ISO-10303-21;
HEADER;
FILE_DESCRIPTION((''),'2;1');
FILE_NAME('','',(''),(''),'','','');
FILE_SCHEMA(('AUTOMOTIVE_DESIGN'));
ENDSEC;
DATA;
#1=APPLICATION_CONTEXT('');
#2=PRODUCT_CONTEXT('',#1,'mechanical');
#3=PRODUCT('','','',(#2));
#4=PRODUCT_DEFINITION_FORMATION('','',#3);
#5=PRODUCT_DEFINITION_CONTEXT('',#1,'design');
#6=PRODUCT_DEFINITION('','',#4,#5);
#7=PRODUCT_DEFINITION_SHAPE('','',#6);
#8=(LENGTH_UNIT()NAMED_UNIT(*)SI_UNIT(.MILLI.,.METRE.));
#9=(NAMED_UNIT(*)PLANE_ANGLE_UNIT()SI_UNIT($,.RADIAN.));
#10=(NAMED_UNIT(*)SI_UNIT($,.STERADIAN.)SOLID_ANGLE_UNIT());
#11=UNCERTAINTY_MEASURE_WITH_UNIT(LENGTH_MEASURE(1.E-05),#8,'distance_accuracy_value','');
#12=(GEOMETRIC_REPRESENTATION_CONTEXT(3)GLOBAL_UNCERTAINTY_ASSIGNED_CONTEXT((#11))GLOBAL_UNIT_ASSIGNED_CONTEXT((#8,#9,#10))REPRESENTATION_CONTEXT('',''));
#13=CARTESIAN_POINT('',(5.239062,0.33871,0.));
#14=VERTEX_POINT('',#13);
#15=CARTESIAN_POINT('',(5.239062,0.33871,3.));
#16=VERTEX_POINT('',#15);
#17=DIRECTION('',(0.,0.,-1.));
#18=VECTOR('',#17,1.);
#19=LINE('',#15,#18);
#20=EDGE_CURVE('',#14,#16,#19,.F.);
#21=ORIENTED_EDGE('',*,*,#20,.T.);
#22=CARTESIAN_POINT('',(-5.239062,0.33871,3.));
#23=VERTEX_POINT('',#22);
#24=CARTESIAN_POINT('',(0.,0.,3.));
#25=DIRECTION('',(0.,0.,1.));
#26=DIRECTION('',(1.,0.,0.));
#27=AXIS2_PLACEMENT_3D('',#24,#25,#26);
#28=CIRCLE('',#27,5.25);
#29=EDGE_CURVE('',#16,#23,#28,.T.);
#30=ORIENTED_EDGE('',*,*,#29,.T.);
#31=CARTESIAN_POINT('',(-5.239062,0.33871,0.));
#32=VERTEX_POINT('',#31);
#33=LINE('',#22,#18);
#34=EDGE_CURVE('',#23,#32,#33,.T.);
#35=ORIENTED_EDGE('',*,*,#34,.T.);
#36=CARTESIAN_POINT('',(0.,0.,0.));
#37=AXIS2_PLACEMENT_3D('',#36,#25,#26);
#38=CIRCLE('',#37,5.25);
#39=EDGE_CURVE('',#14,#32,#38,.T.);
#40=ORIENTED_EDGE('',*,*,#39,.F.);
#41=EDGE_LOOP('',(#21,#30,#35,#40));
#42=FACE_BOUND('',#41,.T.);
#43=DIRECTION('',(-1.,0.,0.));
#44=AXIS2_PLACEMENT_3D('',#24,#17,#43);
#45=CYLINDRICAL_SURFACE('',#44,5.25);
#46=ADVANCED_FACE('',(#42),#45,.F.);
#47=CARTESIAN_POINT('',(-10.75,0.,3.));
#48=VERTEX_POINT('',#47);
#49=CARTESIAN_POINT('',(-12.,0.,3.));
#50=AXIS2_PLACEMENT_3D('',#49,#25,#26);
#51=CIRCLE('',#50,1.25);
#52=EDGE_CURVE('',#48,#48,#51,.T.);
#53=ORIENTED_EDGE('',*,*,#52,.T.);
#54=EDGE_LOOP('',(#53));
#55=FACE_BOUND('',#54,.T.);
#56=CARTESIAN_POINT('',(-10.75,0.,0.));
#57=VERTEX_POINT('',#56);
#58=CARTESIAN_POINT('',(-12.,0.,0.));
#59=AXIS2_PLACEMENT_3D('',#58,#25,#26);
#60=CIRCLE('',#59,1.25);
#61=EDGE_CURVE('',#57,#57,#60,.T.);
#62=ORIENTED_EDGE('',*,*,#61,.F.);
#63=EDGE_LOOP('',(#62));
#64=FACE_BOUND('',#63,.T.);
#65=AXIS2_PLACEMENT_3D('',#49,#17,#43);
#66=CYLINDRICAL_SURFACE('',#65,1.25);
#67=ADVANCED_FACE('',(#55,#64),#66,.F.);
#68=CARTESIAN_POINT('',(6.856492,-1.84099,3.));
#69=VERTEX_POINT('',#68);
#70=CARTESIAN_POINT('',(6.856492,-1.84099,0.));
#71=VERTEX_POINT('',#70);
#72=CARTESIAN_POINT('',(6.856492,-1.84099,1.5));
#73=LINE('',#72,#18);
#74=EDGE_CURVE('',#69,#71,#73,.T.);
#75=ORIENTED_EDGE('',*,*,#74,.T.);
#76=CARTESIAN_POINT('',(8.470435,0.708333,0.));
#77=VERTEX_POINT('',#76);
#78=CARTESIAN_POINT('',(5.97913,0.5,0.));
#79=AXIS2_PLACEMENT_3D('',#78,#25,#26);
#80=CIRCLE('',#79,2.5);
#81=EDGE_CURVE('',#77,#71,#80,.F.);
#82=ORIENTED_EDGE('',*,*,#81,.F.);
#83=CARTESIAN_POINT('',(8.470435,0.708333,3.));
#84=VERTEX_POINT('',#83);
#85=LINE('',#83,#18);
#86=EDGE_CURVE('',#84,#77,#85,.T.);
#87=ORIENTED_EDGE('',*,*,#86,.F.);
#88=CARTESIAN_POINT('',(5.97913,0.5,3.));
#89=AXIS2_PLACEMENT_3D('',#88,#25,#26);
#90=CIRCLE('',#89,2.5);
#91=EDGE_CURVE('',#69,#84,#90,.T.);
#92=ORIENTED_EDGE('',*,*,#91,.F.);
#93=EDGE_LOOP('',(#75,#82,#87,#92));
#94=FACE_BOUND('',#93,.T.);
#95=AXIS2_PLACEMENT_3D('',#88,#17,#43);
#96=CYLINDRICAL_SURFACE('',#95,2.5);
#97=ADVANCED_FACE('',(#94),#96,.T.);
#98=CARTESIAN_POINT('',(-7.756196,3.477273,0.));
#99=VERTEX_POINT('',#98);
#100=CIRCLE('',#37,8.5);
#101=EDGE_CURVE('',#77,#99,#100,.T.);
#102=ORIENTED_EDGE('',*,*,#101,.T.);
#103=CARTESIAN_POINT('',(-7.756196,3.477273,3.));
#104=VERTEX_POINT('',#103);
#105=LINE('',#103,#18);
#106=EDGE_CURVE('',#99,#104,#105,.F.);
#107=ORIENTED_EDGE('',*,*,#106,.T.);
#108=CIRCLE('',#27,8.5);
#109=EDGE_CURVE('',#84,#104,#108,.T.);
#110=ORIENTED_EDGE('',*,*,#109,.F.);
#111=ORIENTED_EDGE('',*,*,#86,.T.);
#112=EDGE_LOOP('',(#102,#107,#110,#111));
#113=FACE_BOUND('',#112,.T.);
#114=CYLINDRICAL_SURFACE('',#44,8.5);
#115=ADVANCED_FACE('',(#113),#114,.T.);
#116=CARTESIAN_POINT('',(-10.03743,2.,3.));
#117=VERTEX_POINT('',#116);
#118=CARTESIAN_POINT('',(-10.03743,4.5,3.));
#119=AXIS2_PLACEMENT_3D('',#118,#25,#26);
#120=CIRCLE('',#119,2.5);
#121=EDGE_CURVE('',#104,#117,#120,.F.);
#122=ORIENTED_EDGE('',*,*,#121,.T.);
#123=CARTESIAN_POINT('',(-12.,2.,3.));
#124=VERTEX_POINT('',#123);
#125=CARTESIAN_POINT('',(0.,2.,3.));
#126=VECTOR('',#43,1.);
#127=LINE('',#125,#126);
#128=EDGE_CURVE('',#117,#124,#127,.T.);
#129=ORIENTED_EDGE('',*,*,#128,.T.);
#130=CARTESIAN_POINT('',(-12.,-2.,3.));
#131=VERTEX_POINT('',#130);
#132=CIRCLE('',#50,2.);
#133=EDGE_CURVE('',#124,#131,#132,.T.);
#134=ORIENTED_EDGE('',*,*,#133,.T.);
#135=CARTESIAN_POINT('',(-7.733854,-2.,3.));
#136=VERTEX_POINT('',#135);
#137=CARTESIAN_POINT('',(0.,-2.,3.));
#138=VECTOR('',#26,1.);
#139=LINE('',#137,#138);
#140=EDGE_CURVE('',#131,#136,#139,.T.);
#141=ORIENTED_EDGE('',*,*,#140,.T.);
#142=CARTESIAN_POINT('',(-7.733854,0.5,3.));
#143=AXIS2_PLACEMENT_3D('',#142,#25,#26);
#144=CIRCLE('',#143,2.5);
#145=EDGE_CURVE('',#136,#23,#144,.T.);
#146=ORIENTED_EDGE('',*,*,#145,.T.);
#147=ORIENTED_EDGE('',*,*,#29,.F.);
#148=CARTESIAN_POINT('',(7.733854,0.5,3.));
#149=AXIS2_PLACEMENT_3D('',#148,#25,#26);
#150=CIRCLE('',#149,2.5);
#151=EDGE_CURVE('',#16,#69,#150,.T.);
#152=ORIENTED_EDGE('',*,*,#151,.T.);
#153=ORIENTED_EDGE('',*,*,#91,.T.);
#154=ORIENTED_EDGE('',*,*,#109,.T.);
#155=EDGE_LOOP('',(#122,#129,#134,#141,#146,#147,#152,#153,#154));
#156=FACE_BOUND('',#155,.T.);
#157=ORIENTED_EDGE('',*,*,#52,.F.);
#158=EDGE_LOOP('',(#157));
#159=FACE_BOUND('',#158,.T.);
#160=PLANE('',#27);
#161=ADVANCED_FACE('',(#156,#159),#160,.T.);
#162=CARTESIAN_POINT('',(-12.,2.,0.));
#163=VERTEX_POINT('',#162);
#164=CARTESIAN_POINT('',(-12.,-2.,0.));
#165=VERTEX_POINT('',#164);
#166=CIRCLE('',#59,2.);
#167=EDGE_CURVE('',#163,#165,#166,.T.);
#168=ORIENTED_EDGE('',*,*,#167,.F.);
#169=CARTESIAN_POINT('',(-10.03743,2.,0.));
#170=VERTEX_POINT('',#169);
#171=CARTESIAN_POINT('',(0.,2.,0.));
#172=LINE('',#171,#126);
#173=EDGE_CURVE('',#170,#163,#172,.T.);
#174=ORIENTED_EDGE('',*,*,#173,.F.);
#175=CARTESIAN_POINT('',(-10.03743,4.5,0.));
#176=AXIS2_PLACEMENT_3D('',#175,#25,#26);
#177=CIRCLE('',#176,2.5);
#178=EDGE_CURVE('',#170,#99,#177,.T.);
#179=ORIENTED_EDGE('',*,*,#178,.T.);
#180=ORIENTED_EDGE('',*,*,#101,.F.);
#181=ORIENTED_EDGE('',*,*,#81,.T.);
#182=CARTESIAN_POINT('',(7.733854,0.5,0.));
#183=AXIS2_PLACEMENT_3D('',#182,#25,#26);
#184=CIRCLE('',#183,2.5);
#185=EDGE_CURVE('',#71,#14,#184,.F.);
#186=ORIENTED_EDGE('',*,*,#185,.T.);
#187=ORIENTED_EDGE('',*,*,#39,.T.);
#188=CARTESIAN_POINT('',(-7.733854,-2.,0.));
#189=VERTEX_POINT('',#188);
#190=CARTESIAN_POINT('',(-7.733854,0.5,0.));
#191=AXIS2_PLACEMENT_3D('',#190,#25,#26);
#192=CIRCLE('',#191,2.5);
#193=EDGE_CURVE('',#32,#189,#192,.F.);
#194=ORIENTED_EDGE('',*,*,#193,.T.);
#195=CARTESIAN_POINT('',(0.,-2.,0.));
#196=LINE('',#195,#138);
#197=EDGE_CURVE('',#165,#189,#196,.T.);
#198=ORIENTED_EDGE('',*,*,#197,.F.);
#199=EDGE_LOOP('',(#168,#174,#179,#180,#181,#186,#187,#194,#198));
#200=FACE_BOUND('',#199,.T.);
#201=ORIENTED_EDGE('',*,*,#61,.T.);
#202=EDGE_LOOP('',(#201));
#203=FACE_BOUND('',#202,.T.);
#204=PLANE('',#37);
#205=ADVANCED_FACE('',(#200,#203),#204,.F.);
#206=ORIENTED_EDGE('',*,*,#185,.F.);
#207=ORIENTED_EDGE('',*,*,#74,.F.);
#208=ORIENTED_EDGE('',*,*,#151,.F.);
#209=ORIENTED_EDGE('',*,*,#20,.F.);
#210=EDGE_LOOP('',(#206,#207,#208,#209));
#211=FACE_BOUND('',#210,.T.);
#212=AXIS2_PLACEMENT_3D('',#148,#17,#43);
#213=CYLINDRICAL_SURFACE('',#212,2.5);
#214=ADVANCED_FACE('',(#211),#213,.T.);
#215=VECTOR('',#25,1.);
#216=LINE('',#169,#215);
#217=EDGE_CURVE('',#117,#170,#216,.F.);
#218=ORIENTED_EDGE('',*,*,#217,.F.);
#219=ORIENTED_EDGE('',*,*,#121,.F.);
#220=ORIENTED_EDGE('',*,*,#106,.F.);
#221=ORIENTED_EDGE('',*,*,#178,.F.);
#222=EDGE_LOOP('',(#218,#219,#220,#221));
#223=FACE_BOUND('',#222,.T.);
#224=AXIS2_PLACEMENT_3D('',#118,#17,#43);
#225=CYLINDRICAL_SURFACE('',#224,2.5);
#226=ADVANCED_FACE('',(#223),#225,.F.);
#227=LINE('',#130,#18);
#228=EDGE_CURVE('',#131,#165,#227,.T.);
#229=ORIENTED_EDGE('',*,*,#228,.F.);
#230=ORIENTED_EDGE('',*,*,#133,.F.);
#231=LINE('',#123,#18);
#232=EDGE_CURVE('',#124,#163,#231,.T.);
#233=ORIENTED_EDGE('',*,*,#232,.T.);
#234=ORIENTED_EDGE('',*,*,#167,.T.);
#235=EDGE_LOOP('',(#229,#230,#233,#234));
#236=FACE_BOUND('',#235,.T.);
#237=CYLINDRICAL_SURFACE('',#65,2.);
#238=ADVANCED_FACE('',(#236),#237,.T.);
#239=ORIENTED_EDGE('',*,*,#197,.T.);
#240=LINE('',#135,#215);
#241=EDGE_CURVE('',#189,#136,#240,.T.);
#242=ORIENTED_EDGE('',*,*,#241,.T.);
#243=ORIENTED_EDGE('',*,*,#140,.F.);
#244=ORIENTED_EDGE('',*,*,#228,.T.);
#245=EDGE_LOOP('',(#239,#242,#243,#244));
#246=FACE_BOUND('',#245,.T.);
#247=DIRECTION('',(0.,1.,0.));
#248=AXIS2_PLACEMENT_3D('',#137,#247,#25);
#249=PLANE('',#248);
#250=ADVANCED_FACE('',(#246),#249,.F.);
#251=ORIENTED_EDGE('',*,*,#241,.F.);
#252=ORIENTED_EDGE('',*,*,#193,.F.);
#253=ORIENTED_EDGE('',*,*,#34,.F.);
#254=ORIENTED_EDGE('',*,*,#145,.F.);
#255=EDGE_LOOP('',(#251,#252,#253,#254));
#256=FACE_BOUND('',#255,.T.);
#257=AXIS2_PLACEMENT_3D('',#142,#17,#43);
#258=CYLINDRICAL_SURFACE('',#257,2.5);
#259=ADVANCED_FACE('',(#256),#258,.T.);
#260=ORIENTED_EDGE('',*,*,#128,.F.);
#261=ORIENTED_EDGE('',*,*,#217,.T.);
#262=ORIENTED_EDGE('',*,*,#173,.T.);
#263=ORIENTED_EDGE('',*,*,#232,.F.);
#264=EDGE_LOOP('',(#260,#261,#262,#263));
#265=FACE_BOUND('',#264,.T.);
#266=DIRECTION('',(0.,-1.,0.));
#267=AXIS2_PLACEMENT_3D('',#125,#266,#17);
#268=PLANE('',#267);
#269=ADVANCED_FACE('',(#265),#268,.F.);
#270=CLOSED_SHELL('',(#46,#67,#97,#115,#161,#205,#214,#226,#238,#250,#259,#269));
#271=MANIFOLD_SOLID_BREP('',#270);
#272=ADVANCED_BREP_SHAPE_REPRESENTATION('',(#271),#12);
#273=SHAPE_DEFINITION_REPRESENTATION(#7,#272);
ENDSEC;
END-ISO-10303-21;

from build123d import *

# Parameters (mm, degrees)
SKETCH_1_R      = 1.25
EXTRUDE_1_DEPTH = 3
FILLET_2_R      = 2.5


with BuildPart() as part:
    # Эскиз1 → Бобышка-Вытянуть1 (new body)
    with BuildSketch(Plane.XY):
        with BuildLine():
            Line((-12, -2), (-4.85412196, -2))
            ThreePointArc((-4.85412196, -2), (0, 5.25), (4.85412196, -2))
            Line((4.85412196, -2), (8.261355821, -2))
            ThreePointArc((8.261355821, -2), (2, 8.261355821), (-8.261355821, 2))
            Line((-8.261355821, 2), (-12, 2))
            ThreePointArc((-12, 2), (-14, 0), (-12, -2))
        make_face()
        with Locations((-12, 0)):
            Circle(SKETCH_1_R, mode=Mode.SUBTRACT)
    extrude(amount=EXTRUDE_1_DEPTH)

    # Скругление2
    # the kernel refuses this fillet: 2.5 mm, written as the material it adds along each edge
    with BuildSketch(Plane(origin=(-8.261355821, 2, 0), x_dir=(0.3235599082125896, 0.9462076863973683, 0), z_dir=(0, 0, 1))) as fillet_2_piece_1:
        with BuildLine():
            CenterArc((1.790852834, 2.489434763), FILLET_2_R, 198.878350274, 65.852260083)
            Line((-0.574666382, 1.680534992), (0, 0))
            ThreePointArc((0, 0), (0.780628158, 0.035921806), (1.561256317, 0))
        make_face()
    extrude(amount=3)
    # the kernel refuses this fillet: 2.5 mm, written as the material it takes off along each edge
    with BuildSketch(Plane(origin=(8.261355821, -2, -6.790979044), x_dir=(-1, 0, 0), z_dir=(0, 0, 1))) as fillet_2_2_piece_1:
        with BuildLine():
            CenterArc((2.282225449, -2.5), FILLET_2_R, 90, 94.780191847)
            ThreePointArc((-0.209078872, -2.708333333), (-0.21342859, -1.345760603), (0, 0))
            Line((0, 0), (2.282225449, 0))
        make_face()
    extrude(amount=16.581958087, mode=Mode.SUBTRACT)
    with BuildSketch(Plane(origin=(4.85412196, -2, -7.199330473), x_dir=(0.16240998892159433, 0.9867233632069768, 0), z_dir=(0, 0, 1))) as fillet_2_2_piece_2:
        with BuildLine():
            CenterArc((2.934505681, -2.435474059), FILLET_2_R, 103.045879434, 86.300928937)
            Line((0.467697273, -2.841499031), (0, 0))
            ThreePointArc((0, 0), (1.185088833, -0.135504477), (2.370177665, 0))
        make_face()
    extrude(amount=17.398660947, mode=Mode.SUBTRACT)
    with BuildSketch(Plane(origin=(-4.85412196, -2, -7.199330473), x_dir=(-1, 0, 0), z_dir=(0, 0, 1))) as fillet_2_2_piece_3:
        with BuildLine():
            CenterArc((2.879732189, -2.5), FILLET_2_R, 90, 86.300928937)
            ThreePointArc((0.384940528, -2.338709677), (0.326175697, -1.147347558), (0, 0))
            Line((0, 0), (2.879732189, 0))
        make_face()
    extrude(amount=17.398660947, mode=Mode.SUBTRACT)


solid = part.part
